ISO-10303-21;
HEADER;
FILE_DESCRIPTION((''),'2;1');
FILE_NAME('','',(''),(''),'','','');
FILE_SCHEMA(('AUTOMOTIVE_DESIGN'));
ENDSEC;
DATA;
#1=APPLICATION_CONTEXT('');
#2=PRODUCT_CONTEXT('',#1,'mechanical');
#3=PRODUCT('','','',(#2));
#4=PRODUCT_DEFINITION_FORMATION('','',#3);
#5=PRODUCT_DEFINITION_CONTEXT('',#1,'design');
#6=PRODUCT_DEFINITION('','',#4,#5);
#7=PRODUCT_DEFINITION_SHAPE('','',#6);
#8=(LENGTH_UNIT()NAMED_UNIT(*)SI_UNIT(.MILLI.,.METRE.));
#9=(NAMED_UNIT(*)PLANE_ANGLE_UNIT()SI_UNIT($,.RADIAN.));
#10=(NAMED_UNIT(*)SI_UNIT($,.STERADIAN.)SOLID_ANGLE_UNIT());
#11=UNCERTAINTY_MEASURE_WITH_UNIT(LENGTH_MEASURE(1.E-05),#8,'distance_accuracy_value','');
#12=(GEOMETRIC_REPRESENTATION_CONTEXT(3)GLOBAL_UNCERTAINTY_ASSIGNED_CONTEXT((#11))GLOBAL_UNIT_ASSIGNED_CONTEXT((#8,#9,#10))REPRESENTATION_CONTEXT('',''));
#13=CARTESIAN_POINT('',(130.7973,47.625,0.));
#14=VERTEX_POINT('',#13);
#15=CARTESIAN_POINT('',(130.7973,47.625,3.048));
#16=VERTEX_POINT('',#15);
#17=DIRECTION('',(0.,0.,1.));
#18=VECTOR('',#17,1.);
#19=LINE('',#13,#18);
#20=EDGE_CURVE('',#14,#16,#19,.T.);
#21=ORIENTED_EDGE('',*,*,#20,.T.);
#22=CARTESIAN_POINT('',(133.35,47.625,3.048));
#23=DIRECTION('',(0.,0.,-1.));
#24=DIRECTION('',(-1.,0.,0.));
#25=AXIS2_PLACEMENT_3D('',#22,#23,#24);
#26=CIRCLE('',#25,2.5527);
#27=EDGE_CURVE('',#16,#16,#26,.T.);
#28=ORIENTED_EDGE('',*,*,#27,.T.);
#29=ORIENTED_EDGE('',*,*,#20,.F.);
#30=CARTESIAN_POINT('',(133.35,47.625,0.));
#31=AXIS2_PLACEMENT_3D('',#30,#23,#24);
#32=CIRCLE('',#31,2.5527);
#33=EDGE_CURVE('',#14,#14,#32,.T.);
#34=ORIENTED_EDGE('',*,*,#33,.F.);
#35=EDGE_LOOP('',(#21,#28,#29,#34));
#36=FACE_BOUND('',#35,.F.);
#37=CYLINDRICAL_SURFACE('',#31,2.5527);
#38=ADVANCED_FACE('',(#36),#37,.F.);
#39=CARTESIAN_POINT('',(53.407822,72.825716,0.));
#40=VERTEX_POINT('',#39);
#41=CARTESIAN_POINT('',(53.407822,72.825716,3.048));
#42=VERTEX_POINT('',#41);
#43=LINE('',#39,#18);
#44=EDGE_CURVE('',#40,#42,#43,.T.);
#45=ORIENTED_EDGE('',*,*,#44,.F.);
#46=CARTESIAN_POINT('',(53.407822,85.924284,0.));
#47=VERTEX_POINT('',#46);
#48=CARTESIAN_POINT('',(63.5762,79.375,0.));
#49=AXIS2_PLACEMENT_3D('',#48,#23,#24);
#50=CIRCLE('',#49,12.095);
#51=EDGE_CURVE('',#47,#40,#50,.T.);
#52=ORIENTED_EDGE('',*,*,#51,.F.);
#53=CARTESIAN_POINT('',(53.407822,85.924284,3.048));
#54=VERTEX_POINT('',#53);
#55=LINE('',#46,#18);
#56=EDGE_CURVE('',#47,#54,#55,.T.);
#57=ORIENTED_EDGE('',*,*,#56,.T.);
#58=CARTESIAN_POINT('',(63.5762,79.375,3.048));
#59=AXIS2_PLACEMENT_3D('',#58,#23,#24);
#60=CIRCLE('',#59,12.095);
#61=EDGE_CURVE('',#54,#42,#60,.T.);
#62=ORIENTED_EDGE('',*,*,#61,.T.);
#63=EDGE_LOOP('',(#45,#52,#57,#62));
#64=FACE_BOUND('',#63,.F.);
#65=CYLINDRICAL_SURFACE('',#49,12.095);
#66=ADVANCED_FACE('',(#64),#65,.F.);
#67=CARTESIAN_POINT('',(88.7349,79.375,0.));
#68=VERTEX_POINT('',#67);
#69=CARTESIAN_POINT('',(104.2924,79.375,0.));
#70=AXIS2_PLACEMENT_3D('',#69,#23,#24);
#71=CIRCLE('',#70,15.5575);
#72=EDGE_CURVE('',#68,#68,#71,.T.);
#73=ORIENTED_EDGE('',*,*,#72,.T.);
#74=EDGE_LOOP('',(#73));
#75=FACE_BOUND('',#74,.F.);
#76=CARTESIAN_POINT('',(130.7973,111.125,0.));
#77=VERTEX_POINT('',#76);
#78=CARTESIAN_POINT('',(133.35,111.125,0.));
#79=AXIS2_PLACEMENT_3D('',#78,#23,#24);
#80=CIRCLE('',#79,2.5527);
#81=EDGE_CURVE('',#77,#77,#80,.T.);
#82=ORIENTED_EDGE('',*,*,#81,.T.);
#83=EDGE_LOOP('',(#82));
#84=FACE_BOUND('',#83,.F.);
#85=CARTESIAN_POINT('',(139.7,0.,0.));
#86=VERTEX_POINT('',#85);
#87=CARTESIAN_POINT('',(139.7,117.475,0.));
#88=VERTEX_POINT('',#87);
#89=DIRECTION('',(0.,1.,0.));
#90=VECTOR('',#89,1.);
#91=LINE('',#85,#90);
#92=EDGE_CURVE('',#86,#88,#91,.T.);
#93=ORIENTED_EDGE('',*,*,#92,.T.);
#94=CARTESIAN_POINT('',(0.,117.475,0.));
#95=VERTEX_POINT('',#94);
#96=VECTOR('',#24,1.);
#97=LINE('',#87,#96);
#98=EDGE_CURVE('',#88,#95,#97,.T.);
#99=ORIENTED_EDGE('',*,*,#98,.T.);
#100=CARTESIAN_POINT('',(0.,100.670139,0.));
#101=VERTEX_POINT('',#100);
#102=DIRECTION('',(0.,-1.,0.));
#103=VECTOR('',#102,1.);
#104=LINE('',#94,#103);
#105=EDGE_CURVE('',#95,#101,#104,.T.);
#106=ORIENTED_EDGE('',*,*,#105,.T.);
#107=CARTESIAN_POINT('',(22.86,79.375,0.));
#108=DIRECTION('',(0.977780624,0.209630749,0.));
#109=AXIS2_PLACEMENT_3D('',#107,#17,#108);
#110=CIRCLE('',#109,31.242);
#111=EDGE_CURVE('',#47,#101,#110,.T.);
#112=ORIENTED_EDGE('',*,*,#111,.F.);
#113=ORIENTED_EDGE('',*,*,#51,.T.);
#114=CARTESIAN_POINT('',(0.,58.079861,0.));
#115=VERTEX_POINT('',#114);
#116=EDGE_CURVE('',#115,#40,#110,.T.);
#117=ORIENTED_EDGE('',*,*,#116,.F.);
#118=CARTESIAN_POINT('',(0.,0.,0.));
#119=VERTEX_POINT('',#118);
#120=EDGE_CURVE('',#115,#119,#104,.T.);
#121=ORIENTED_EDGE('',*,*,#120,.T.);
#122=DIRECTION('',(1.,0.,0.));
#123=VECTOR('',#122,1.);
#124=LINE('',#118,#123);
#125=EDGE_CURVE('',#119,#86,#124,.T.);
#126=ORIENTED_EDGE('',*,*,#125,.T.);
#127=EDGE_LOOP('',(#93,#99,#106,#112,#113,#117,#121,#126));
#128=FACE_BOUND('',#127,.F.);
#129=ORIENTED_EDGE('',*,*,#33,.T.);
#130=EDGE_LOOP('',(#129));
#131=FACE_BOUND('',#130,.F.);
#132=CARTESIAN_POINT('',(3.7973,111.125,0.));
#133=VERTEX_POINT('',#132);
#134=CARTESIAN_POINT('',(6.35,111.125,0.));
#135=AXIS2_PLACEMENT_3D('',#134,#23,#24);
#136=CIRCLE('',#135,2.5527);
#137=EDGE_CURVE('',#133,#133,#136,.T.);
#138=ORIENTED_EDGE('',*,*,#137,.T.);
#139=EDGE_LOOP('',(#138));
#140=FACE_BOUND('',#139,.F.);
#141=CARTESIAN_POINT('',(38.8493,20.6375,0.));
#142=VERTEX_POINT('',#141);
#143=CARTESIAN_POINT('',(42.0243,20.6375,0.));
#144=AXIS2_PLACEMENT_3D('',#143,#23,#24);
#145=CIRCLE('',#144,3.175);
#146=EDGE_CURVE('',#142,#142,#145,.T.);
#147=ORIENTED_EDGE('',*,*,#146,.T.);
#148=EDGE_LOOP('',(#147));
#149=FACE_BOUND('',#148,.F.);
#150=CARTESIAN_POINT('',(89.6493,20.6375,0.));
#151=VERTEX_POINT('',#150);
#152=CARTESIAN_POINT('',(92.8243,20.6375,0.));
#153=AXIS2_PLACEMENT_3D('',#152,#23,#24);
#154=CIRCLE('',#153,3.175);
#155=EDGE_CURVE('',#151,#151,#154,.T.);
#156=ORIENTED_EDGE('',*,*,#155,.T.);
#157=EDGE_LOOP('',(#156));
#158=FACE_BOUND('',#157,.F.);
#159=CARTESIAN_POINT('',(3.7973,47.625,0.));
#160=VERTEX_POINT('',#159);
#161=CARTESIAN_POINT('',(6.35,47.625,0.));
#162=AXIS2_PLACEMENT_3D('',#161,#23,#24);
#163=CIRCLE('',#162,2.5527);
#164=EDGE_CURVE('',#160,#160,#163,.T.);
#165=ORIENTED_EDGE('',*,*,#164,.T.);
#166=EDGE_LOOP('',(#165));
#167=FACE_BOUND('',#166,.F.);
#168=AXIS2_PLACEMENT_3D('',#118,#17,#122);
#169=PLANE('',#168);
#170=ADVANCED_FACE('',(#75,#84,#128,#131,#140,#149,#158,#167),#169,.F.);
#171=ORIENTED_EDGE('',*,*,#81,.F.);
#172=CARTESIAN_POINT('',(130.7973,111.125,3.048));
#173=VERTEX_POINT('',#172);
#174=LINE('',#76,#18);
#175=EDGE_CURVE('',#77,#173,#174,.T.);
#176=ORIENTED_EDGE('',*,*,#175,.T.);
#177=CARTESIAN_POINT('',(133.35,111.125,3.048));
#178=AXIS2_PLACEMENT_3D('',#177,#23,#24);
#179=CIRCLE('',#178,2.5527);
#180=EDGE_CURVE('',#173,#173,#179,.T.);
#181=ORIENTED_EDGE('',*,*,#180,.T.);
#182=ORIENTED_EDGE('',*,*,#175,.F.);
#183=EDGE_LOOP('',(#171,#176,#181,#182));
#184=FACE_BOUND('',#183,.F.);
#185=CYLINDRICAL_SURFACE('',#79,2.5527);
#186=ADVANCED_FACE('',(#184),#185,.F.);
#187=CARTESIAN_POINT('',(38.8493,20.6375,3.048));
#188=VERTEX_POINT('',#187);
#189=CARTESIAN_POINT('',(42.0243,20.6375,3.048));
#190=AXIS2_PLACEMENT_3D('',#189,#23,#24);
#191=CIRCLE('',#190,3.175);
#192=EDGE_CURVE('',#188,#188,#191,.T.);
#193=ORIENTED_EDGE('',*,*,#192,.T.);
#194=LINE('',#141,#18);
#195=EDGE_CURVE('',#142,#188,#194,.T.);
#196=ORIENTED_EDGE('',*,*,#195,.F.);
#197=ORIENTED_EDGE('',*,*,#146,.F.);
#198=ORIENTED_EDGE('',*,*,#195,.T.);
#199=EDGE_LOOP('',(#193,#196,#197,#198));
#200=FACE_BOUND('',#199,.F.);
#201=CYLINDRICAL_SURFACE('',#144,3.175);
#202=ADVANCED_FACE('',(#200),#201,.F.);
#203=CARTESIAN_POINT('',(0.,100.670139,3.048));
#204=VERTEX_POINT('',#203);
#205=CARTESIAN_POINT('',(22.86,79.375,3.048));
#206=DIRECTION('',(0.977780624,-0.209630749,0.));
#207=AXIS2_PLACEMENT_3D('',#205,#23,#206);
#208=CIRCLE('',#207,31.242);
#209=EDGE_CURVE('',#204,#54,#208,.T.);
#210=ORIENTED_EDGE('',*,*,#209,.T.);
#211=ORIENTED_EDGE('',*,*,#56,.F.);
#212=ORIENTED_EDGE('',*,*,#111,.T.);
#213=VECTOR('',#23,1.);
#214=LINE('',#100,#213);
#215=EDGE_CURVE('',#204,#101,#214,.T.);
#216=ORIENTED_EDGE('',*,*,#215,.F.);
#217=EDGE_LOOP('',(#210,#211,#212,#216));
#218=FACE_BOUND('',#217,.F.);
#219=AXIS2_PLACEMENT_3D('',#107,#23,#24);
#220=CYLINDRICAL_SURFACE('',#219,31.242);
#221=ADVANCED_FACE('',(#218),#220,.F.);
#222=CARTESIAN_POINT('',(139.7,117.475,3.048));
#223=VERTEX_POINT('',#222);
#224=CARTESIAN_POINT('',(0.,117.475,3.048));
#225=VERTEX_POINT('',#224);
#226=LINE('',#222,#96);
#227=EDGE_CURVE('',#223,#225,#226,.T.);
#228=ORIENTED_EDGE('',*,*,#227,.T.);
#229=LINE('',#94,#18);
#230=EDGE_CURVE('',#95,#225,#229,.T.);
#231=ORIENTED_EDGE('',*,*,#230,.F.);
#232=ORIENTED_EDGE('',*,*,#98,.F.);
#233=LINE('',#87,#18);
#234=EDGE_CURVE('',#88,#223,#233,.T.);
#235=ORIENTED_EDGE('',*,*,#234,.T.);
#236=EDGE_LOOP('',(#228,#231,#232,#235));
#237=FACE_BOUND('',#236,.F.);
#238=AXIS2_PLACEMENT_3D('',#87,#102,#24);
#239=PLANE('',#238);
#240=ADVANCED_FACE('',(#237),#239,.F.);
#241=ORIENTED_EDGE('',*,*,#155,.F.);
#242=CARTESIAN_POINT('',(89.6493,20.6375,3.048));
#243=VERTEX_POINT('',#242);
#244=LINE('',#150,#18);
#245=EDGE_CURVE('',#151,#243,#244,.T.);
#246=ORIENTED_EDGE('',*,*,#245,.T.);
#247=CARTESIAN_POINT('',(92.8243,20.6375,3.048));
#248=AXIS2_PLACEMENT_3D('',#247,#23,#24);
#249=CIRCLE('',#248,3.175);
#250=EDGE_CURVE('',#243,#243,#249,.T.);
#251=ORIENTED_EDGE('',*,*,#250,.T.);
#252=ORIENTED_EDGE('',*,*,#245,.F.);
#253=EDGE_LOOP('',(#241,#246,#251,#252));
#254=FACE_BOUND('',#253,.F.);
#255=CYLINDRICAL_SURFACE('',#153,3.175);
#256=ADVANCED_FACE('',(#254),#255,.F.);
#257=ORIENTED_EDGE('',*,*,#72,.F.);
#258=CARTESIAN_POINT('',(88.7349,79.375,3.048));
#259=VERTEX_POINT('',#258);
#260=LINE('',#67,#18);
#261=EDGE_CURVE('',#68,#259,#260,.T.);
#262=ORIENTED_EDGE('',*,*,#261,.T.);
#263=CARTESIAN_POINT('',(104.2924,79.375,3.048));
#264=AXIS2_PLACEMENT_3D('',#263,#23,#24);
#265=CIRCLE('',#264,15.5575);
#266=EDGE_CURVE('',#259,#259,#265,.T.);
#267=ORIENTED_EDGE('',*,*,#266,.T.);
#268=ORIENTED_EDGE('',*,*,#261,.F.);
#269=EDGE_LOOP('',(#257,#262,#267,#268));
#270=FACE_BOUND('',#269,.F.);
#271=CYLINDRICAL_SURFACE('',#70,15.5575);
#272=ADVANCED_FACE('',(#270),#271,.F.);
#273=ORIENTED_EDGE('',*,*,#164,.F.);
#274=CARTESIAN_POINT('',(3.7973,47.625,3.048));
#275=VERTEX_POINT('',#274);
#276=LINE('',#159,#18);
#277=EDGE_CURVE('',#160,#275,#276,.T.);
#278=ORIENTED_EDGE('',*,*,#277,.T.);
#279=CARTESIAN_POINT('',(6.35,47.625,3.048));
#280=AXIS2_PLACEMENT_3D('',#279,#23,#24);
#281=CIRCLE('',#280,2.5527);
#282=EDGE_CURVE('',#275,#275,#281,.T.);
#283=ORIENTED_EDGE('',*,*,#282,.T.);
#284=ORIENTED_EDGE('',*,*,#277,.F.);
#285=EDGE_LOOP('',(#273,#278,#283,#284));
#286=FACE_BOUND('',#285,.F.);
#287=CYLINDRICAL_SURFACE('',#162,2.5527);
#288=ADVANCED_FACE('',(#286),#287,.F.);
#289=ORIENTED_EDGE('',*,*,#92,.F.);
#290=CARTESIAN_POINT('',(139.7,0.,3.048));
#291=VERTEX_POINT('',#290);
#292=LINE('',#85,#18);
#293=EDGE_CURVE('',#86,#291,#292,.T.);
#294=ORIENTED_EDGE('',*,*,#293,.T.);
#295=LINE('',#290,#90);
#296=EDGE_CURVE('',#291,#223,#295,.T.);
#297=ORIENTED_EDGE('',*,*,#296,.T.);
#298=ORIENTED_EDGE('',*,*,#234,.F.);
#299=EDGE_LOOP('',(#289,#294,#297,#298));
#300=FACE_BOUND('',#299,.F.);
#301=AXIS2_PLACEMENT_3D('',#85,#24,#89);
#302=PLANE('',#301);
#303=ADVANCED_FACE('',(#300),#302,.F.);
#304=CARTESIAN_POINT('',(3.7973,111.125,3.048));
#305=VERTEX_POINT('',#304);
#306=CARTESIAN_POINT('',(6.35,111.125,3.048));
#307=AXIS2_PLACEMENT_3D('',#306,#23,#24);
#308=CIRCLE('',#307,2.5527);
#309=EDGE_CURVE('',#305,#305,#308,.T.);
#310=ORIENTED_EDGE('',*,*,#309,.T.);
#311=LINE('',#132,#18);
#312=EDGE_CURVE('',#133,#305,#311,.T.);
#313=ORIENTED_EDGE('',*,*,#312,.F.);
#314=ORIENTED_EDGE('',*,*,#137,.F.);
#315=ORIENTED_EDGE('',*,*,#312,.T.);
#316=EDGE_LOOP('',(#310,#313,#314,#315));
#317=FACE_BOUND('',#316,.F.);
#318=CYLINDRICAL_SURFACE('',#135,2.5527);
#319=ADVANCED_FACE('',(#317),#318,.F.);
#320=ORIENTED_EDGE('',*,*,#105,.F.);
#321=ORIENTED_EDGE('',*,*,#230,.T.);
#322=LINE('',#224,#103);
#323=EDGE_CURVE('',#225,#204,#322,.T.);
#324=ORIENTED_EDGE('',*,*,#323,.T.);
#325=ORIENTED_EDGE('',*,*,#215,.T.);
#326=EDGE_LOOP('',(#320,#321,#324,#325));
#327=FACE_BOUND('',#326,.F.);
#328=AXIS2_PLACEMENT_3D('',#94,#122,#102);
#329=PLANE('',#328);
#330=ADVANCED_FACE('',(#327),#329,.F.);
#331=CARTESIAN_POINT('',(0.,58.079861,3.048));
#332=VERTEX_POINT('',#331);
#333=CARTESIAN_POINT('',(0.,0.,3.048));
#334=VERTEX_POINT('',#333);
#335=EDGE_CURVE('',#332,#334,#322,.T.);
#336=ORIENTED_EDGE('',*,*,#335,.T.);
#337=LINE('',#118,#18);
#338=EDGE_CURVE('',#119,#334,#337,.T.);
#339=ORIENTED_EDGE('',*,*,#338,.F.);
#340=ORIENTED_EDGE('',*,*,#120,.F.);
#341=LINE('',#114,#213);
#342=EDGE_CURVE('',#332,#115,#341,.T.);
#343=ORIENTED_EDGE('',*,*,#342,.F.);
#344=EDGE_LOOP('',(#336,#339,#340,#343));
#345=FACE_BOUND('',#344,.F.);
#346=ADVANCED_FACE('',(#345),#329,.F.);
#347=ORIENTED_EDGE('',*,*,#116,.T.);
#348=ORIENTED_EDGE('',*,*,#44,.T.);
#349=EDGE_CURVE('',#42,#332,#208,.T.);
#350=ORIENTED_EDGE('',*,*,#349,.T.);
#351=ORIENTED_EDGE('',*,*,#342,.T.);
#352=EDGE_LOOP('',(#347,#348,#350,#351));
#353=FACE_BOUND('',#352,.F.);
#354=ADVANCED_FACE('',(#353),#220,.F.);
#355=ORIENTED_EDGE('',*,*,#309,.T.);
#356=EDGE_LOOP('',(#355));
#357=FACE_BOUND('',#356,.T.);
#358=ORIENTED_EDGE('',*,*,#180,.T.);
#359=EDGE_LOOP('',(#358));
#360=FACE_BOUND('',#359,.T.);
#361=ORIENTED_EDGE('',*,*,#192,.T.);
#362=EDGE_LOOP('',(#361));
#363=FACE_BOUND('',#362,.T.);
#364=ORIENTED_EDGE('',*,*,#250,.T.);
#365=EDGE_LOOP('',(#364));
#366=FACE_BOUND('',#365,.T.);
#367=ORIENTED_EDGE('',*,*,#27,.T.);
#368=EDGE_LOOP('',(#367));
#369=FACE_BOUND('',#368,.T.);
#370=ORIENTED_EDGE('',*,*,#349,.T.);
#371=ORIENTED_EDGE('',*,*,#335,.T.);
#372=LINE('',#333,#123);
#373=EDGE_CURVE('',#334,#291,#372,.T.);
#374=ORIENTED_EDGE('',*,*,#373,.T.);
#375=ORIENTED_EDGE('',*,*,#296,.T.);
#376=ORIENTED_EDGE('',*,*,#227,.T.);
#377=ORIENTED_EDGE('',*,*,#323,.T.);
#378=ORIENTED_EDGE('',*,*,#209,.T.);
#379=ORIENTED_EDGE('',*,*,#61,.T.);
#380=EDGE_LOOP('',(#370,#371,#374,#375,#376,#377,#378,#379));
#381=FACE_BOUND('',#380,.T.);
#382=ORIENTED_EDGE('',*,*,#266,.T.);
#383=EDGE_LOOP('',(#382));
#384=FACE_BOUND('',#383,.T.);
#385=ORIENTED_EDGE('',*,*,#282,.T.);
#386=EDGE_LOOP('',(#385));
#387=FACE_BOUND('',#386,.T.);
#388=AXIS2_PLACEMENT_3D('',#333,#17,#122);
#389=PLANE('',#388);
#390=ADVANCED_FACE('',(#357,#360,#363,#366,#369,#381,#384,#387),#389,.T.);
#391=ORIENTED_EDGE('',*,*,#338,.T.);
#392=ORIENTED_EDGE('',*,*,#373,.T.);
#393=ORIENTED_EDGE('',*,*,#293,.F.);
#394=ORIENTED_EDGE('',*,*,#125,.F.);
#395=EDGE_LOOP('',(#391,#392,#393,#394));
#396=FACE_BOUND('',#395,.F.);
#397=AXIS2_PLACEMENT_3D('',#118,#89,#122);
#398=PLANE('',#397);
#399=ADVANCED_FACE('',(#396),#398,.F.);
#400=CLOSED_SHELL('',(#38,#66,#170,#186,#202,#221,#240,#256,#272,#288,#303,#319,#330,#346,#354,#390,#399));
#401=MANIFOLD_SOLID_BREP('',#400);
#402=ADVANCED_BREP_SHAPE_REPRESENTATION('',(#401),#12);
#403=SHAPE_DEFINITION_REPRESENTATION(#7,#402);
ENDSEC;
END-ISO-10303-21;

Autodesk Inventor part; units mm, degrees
ref_plane "YZ Plane" through (0, 0, 0) normal (1, 0, 0) x (0, 1, 0)
ref_plane "XZ Plane" through (0, 0, 0) normal (0, 1, 0) x (-1, 0, 0)
ref_plane "XY Plane" through (0, 0, 0) normal (0, 0, 1) x (1, 0, 0)
sketch "Sketch1" plane through (0, 0, 0) normal (0, 0, 1) x (1, 0, 0)
  line L0 (0, 0) -> (139.7, 0)
  line L1 (139.7, 0) -> (139.7, 117.475)
  line L2 (139.7, 117.475) -> (0, 117.475)
  line L3 (0, 117.475) -> (0, 0)
  dimension "d0" = 139.7
  dimension "d1" = 117.475
extrude "Plate3" add sketch "Sketch1" along normal blind 3.048
sketch "Sketch4" plane through (0, 0, 0) normal (0, 0, -1) x (-1, 0, 0)
  circle A0 centre (-22.86, 79.375) radius 31.242
  circle A1 centre (-6.35, 111.125) radius 2.5527
  circle A2 centre (-6.35, 47.625) radius 2.5527
  circle A3 centre (-133.35, 111.125) radius 2.5527
  circle A4 centre (-133.35, 47.625) radius 2.5527
  arc A5 (-136.4869, 13.4874) -> (-136.4869, 27.7876) centre (-136.4869, 20.6375) ccw
  line L0 (-150.7617, 27.7876) -> (-136.4869, 27.7876)
  line L1 (-136.4869, 13.4874) -> (-150.7617, 13.4874)
  arc A6 (-99.9617, 27.7876) -> (-99.9617, 13.4874) centre (-99.9617, 20.6375) ccw
  line L2 (-99.9617, 27.7876) -> (-85.6869, 27.7876)
  line L3 (-85.6869, 13.4874) -> (-99.9617, 13.4874)
  arc A7 (-85.6869, 13.4874) -> (-85.6869, 27.7876) centre (-85.6869, 20.6375) ccw
  arc A8 (-49.1617, 27.7876) -> (-49.1617, 13.4874) centre (-49.1617, 20.6375) ccw
  line L4 (-49.1617, 27.7876) -> (-34.8869, 27.7876)
  arc A9 (-34.8869, 13.4874) -> (-34.8869, 27.7876) centre (-34.8869, 20.6375) ccw
  line L5 (-34.8869, 13.4874) -> (-49.1617, 13.4874)
  arc A10 (1.6383, 27.7876) -> (1.6383, 13.4874) centre (1.6383, 20.6375) ccw
  line L6 (1.6383, 27.7876) -> (15.9131, 27.7876)
  line L7 (15.9131, 13.4874) -> (1.6383, 13.4874)
  arc A11 (15.9131, 13.4874) -> (15.9131, 27.7876) centre (15.9131, 20.6375) ccw
  circle A12 centre (-104.2924, 79.375) radius 15.5575
  circle A13 centre (-63.5762, 79.375) radius 12.095
  circle A14 centre (-22.86, 79.375) radius 31.242
  circle A15 centre (-6.35, 47.625) radius 2.5527
  circle A16 centre (-63.5762, 79.375) radius 12.095
  circle A17 centre (-104.2924, 79.375) radius 15.5575
  circle A18 centre (-133.35, 111.125) radius 2.5527
  circle A19 centre (-133.35, 47.625) radius 2.5527
  circle A20 centre (-6.35, 111.125) radius 2.5527
  circle A21 centre (-92.8243, 20.6375) radius 3.175
  circle A22 centre (-42.0243, 20.6375) radius 3.175
  point P0 (0, 0)
  dimension "d16" = 7.1501
  dimension "d17" = 7.1501
  dimension "d18" = 7.1374
  dimension "d19" = 7.1374
  dimension "d20" = 6.35
  dimension "d21" = 6.35
extrude "Cut1" cut sketch "Sketch4" against normal blind 3.048 contours A0 A13 | A13 A0 | A0 A13 | A1 | A2 | A3 | A4 | A12 | A21 | A22
equation "\"d12\" = Thickness"
equation "\"BendRadius\" = Thickness"
equation "\"BendReliefWidth\" = Thickness"
equation "\"BendReliefDepth\" = 0.5 * Thickness"
equation "\"CornerReliefSize\" = 4 * Thickness"
equation "\"MinimumRemnant\" = 2 * Thickness"
equation "\"TransitionRadius\" = BendRadius"
equation "\"JacobiRadiusSize\" = BendRadius"
equation "\"GapSize\" = Thickness"
equation "\"d2\" = BendRadius"
equation "\"d3\" = BendRadius"
equation "\"d4\" = BendRadius"
equation "\"Thickness\" = 3.048"
properties part number "attatching plate for toughbox"
